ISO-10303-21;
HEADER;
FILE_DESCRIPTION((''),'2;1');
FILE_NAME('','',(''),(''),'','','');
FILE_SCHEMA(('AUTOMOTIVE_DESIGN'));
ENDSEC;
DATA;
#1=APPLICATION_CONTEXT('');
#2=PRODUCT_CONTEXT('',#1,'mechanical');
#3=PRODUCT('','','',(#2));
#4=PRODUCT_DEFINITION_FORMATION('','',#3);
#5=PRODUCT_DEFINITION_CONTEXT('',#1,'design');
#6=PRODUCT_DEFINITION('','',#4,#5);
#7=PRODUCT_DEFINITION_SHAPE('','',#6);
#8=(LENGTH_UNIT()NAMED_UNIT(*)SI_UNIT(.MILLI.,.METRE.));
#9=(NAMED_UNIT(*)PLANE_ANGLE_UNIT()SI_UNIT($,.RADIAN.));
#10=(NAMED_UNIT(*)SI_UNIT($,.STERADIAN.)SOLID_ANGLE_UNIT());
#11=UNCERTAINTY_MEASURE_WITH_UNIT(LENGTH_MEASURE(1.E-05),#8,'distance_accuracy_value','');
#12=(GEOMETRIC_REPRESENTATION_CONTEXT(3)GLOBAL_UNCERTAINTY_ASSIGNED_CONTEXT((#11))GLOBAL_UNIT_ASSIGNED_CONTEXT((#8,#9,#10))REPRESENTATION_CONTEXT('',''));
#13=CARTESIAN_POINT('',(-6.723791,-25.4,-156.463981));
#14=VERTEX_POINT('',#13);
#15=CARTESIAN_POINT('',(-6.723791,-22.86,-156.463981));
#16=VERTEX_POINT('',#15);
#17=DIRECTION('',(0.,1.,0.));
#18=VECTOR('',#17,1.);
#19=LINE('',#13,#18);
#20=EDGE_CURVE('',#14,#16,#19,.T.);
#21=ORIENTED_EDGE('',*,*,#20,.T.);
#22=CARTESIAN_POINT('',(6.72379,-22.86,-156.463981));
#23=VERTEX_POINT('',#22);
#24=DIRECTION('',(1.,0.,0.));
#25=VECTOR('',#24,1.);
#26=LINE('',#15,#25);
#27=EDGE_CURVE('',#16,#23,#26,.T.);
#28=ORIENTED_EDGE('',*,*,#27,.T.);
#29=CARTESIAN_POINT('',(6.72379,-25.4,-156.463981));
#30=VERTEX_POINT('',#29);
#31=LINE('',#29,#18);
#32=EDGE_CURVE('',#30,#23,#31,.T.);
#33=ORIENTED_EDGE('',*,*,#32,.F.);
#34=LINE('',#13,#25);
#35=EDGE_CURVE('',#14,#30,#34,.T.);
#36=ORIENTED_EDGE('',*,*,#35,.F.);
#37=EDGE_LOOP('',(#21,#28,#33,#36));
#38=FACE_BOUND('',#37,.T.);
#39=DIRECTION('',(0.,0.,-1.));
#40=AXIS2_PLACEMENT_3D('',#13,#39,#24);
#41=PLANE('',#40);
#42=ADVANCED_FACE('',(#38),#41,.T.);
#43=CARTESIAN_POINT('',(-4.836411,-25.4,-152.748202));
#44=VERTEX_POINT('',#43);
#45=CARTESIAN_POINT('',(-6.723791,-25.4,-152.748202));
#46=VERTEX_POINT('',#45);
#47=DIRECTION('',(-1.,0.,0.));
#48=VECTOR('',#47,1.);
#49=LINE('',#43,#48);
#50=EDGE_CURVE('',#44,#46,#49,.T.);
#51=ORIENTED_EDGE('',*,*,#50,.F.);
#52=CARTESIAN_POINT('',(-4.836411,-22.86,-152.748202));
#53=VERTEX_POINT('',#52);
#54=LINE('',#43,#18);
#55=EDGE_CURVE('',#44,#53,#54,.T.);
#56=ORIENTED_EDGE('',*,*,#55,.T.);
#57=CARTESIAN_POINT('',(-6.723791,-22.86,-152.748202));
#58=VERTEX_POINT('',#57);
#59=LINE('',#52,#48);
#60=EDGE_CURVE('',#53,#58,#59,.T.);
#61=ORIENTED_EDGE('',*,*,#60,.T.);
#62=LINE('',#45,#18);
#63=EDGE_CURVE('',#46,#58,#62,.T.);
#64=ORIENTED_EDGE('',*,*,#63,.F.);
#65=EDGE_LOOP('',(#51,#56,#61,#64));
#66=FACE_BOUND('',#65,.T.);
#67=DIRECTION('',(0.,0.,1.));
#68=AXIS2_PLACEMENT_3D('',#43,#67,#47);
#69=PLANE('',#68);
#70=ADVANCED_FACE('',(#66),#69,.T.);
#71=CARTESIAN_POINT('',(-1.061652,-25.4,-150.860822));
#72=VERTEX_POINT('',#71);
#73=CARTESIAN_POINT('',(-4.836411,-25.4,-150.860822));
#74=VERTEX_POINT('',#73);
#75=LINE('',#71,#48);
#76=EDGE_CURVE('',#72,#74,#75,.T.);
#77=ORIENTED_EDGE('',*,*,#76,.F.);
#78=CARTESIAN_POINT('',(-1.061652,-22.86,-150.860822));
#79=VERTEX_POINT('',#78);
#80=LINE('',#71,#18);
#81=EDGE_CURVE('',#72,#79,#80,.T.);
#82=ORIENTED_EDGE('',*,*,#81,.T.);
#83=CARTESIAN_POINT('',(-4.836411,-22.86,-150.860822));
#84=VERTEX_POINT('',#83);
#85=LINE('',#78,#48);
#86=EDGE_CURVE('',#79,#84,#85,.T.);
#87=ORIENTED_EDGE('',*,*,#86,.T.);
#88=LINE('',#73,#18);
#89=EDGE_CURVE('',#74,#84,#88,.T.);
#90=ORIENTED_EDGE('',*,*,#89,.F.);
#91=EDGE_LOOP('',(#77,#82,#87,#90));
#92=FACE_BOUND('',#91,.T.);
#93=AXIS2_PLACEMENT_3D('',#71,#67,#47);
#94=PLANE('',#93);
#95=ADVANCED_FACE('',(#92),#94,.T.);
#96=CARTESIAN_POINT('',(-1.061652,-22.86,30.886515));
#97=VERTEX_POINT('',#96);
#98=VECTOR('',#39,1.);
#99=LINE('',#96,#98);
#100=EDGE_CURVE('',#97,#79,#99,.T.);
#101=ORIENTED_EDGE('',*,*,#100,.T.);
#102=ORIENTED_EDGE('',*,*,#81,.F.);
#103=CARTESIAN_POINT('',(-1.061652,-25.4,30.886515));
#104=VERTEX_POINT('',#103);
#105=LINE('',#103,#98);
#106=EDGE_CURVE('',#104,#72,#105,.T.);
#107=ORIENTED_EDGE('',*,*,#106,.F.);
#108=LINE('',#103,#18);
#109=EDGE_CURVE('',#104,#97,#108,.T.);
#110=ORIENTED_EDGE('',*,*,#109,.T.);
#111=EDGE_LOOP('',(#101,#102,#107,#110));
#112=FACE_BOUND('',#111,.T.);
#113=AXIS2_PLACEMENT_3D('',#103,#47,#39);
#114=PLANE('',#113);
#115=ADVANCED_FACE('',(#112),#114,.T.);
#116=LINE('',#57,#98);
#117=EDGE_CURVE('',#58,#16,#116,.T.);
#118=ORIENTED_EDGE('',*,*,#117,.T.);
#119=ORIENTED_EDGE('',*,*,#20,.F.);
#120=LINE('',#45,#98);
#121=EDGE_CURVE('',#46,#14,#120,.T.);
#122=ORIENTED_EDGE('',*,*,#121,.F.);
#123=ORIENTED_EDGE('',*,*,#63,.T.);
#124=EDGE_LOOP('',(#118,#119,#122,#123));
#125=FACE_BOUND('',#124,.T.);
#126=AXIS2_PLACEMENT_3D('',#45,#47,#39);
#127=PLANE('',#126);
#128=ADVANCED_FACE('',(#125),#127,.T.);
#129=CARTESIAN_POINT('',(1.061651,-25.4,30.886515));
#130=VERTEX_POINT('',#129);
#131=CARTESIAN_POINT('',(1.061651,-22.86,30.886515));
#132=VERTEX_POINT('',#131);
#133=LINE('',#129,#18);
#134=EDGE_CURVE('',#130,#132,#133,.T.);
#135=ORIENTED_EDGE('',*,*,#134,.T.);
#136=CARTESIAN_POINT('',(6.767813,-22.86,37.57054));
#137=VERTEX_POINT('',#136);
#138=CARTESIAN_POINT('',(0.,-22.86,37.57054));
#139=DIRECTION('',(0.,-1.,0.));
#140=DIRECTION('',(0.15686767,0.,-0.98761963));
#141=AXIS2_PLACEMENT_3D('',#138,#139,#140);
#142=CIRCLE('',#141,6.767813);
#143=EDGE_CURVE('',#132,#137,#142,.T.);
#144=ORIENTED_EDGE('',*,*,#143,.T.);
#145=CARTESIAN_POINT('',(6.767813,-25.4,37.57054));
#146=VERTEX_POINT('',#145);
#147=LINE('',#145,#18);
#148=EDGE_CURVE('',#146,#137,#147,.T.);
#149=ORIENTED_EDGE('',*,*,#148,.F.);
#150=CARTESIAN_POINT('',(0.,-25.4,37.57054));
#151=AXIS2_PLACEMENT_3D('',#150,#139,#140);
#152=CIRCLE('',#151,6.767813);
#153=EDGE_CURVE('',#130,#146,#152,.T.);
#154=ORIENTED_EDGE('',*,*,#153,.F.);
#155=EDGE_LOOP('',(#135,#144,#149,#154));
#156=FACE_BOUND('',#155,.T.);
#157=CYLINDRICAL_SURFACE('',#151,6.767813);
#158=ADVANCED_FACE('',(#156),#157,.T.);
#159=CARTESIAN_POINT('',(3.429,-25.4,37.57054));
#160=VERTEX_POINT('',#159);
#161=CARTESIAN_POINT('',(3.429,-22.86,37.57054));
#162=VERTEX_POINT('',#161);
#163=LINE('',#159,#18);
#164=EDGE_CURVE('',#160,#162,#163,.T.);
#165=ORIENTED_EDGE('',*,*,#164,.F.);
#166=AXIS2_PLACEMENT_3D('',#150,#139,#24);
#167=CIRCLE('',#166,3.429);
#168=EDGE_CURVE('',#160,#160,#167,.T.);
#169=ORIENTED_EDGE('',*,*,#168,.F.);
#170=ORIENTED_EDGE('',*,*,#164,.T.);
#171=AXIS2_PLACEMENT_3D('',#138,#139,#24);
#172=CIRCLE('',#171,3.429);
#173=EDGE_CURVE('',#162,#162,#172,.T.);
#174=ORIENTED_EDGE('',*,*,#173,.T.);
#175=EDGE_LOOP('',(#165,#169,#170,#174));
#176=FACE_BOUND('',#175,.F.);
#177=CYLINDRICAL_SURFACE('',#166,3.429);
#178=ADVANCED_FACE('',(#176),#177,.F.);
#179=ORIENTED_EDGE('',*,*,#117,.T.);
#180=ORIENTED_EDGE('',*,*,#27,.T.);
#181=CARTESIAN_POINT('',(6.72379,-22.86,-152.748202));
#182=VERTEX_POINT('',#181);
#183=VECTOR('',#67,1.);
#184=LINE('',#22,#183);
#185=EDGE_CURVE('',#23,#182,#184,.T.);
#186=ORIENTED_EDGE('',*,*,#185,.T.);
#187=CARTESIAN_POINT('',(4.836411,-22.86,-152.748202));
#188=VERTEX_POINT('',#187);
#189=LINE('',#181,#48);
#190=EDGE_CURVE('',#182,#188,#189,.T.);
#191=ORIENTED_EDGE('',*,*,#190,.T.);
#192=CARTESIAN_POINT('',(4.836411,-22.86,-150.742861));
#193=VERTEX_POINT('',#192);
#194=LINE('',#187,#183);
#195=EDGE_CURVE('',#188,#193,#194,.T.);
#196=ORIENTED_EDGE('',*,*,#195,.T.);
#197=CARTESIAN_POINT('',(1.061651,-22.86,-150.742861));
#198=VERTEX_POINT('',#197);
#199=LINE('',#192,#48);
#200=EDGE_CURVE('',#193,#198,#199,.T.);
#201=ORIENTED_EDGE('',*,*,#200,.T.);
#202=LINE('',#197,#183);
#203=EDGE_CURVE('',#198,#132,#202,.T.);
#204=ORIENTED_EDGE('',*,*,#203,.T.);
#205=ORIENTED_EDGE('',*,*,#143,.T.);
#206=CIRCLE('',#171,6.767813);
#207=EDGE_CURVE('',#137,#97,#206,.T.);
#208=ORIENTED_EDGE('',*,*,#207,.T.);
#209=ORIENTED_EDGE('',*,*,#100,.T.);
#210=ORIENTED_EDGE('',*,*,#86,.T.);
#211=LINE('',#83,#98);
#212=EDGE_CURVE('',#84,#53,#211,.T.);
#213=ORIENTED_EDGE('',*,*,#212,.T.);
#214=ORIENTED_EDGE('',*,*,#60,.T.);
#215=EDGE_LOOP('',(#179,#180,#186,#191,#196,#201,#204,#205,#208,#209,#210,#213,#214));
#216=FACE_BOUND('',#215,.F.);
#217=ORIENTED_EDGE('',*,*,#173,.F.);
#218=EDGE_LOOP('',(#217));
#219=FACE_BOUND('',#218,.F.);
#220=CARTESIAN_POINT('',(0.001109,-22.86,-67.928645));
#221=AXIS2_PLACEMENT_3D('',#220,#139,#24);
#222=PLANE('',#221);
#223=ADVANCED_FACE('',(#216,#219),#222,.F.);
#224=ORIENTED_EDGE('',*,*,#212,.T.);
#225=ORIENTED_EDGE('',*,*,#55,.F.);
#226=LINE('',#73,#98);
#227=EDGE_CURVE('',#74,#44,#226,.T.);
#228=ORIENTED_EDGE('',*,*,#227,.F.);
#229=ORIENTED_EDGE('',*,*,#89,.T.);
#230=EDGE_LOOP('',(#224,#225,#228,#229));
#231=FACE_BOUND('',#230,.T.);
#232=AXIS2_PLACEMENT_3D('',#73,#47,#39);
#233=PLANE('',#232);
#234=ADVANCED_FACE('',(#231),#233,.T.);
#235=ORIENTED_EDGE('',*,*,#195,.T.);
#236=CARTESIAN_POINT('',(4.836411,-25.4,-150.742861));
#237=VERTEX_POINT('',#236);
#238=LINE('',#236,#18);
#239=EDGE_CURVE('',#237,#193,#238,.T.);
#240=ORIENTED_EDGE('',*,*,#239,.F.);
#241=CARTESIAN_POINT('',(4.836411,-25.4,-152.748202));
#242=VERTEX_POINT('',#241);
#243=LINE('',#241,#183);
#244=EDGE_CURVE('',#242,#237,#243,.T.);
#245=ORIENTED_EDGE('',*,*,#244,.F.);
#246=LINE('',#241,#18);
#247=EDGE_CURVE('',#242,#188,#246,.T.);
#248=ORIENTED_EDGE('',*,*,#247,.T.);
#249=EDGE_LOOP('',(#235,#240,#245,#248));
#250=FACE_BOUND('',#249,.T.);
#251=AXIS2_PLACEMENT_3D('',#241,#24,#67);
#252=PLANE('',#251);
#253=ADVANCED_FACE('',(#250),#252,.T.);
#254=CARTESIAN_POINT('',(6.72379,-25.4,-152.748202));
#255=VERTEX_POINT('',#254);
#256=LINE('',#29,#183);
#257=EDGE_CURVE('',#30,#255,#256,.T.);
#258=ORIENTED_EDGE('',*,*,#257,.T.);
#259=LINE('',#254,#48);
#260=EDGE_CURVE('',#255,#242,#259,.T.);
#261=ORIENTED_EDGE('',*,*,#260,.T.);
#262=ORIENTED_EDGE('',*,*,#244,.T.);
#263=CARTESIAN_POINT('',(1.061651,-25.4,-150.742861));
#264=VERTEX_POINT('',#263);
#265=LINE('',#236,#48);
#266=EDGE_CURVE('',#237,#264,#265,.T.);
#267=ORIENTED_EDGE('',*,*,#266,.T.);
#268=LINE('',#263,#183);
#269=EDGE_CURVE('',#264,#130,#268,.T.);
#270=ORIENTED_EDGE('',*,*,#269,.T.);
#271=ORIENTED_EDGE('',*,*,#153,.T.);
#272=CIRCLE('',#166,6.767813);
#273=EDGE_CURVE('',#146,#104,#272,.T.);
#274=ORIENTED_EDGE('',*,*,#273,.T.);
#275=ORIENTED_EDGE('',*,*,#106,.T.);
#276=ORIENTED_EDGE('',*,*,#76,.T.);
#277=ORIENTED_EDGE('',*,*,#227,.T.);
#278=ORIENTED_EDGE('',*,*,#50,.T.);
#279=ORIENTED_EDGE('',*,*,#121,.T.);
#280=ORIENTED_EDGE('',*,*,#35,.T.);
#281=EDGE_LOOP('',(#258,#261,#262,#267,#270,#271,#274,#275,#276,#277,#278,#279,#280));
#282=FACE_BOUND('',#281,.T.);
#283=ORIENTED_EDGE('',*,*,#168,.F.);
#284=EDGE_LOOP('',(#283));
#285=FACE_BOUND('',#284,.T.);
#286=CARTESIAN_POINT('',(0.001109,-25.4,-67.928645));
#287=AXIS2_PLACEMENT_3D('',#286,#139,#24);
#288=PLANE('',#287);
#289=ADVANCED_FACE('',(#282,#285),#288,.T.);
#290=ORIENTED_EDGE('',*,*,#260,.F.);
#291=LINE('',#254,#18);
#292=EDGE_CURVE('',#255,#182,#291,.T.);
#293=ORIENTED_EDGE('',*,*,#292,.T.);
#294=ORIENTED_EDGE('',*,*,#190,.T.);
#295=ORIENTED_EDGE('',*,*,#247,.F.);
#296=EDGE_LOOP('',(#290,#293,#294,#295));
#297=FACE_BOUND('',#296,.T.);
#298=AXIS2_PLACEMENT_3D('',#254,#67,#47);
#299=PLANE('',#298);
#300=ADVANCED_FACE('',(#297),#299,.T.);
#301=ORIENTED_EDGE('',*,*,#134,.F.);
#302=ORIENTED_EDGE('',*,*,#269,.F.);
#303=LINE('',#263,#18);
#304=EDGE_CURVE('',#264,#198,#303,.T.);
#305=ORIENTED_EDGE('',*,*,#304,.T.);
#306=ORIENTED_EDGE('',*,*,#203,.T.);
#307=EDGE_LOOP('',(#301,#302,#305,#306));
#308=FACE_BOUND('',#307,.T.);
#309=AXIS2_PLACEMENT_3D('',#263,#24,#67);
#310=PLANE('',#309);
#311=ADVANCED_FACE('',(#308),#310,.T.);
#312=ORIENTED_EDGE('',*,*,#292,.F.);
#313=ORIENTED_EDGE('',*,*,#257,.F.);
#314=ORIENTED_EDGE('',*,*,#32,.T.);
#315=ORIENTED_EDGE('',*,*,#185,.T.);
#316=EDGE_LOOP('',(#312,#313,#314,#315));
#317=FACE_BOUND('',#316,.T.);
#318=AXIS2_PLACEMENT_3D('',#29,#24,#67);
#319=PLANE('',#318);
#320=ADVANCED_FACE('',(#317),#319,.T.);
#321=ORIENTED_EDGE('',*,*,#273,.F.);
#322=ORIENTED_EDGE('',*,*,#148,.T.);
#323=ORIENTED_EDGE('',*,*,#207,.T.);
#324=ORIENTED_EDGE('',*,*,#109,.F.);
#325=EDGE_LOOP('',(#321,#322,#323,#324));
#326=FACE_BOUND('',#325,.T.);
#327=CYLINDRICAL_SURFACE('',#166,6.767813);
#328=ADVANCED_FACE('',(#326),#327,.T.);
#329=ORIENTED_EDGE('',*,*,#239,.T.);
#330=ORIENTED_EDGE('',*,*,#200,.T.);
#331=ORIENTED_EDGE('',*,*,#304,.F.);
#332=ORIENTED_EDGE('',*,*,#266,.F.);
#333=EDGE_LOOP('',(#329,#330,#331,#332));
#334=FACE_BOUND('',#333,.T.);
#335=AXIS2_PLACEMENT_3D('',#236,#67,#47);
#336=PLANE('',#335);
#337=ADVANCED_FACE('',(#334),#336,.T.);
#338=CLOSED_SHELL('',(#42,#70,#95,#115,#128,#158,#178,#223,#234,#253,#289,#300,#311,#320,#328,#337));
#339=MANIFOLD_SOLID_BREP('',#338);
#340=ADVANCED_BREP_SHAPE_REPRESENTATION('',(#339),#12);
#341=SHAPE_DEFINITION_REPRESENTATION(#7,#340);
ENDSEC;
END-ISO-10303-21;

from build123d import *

# Parameters (mm, degrees)
F1_R     = 3.429
F2_DEPTH = 2.54
F3_DEPTH = 25.4


# Not quite as in the source:
# - a feature names something its author has since deleted; it is built from what else it names


with BuildPart() as f2:
    # F1 (on offset) → F2 (new body)
    with BuildSketch(Plane.XZ.offset(25.4)):
        with BuildLine():
            Line((-6.7237908952, -152.7482020624), (-6.7237908952, -156.4639806747))
            Line((-6.7237908952, -156.4639806747), (-2.04e-07, -156.4639806747))
            Line((-2.04e-07, -156.4639806747), (6.7237904873, -156.4639806747))
            Line((6.7237904873, -156.4639806747), (6.7237904873, -152.7482020624))
            Line((6.7237904873, -152.7482020624), (4.8364107652, -152.7482020624))
            Line((4.8364107652, -152.7482020624), (4.8364107652, -150.8608219091))
            Line((4.8364107652, -150.8608219091), (4.8364107652, -150.7428611076))
            Line((4.8364107652, -150.7428611076), (1.0616511053, -150.7428611076))
            Line((1.0616511053, -150.7428611076), (1.0616511053, 30.8865145628))
            ThreePointArc((1.0616511053, 30.8865145628), (-2.065e-07, 30.802726532), (-1.0616515132, 30.8865146276))
            Line((-1.0616515132, 30.8865146276), (-1.0616515132, -150.7428611076))
            Line((-1.0616515132, -150.7428611076), (-1.0616515132, -150.8608219091))
            Line((-1.0616515132, -150.8608219091), (-4.8364111731, -150.8608219091))
            Line((-4.8364111731, -150.8608219091), (-4.8364111731, -152.7482020624))
            Line((-4.8364111731, -152.7482020624), (-6.7237908952, -152.7482020624))
        make_face()
        with BuildLine():
            ThreePointArc((6.7678133299, 37.5705398619), (-4.3942142646, 42.7177894445), (-1.0616515132, 30.8865146276))
            ThreePointArc((-1.0616515132, 30.8865146276), (-2.065e-07, 30.802726532), (1.0616511053, 30.8865145628))
            ThreePointArc((1.0616511053, 30.8865145628), (5.1472494485, 33.1763254403), (6.7678133299, 37.5705398619))
        make_face()
        with Locations((0, 37.5705398619)):
            Circle(F1_R, mode=Mode.SUBTRACT)
        with Locations((0, 37.5705398619)):
            Circle(F1_R)
    extrude(amount=-F2_DEPTH)

    # F1 (on offset) → F3 (cut)
    with BuildSketch(Plane.XZ.offset(25.4)):
        with Locations((0, 37.5705398619)):
            Circle(F1_R)
    extrude(amount=-F3_DEPTH, mode=Mode.SUBTRACT)


solid = f2.part
